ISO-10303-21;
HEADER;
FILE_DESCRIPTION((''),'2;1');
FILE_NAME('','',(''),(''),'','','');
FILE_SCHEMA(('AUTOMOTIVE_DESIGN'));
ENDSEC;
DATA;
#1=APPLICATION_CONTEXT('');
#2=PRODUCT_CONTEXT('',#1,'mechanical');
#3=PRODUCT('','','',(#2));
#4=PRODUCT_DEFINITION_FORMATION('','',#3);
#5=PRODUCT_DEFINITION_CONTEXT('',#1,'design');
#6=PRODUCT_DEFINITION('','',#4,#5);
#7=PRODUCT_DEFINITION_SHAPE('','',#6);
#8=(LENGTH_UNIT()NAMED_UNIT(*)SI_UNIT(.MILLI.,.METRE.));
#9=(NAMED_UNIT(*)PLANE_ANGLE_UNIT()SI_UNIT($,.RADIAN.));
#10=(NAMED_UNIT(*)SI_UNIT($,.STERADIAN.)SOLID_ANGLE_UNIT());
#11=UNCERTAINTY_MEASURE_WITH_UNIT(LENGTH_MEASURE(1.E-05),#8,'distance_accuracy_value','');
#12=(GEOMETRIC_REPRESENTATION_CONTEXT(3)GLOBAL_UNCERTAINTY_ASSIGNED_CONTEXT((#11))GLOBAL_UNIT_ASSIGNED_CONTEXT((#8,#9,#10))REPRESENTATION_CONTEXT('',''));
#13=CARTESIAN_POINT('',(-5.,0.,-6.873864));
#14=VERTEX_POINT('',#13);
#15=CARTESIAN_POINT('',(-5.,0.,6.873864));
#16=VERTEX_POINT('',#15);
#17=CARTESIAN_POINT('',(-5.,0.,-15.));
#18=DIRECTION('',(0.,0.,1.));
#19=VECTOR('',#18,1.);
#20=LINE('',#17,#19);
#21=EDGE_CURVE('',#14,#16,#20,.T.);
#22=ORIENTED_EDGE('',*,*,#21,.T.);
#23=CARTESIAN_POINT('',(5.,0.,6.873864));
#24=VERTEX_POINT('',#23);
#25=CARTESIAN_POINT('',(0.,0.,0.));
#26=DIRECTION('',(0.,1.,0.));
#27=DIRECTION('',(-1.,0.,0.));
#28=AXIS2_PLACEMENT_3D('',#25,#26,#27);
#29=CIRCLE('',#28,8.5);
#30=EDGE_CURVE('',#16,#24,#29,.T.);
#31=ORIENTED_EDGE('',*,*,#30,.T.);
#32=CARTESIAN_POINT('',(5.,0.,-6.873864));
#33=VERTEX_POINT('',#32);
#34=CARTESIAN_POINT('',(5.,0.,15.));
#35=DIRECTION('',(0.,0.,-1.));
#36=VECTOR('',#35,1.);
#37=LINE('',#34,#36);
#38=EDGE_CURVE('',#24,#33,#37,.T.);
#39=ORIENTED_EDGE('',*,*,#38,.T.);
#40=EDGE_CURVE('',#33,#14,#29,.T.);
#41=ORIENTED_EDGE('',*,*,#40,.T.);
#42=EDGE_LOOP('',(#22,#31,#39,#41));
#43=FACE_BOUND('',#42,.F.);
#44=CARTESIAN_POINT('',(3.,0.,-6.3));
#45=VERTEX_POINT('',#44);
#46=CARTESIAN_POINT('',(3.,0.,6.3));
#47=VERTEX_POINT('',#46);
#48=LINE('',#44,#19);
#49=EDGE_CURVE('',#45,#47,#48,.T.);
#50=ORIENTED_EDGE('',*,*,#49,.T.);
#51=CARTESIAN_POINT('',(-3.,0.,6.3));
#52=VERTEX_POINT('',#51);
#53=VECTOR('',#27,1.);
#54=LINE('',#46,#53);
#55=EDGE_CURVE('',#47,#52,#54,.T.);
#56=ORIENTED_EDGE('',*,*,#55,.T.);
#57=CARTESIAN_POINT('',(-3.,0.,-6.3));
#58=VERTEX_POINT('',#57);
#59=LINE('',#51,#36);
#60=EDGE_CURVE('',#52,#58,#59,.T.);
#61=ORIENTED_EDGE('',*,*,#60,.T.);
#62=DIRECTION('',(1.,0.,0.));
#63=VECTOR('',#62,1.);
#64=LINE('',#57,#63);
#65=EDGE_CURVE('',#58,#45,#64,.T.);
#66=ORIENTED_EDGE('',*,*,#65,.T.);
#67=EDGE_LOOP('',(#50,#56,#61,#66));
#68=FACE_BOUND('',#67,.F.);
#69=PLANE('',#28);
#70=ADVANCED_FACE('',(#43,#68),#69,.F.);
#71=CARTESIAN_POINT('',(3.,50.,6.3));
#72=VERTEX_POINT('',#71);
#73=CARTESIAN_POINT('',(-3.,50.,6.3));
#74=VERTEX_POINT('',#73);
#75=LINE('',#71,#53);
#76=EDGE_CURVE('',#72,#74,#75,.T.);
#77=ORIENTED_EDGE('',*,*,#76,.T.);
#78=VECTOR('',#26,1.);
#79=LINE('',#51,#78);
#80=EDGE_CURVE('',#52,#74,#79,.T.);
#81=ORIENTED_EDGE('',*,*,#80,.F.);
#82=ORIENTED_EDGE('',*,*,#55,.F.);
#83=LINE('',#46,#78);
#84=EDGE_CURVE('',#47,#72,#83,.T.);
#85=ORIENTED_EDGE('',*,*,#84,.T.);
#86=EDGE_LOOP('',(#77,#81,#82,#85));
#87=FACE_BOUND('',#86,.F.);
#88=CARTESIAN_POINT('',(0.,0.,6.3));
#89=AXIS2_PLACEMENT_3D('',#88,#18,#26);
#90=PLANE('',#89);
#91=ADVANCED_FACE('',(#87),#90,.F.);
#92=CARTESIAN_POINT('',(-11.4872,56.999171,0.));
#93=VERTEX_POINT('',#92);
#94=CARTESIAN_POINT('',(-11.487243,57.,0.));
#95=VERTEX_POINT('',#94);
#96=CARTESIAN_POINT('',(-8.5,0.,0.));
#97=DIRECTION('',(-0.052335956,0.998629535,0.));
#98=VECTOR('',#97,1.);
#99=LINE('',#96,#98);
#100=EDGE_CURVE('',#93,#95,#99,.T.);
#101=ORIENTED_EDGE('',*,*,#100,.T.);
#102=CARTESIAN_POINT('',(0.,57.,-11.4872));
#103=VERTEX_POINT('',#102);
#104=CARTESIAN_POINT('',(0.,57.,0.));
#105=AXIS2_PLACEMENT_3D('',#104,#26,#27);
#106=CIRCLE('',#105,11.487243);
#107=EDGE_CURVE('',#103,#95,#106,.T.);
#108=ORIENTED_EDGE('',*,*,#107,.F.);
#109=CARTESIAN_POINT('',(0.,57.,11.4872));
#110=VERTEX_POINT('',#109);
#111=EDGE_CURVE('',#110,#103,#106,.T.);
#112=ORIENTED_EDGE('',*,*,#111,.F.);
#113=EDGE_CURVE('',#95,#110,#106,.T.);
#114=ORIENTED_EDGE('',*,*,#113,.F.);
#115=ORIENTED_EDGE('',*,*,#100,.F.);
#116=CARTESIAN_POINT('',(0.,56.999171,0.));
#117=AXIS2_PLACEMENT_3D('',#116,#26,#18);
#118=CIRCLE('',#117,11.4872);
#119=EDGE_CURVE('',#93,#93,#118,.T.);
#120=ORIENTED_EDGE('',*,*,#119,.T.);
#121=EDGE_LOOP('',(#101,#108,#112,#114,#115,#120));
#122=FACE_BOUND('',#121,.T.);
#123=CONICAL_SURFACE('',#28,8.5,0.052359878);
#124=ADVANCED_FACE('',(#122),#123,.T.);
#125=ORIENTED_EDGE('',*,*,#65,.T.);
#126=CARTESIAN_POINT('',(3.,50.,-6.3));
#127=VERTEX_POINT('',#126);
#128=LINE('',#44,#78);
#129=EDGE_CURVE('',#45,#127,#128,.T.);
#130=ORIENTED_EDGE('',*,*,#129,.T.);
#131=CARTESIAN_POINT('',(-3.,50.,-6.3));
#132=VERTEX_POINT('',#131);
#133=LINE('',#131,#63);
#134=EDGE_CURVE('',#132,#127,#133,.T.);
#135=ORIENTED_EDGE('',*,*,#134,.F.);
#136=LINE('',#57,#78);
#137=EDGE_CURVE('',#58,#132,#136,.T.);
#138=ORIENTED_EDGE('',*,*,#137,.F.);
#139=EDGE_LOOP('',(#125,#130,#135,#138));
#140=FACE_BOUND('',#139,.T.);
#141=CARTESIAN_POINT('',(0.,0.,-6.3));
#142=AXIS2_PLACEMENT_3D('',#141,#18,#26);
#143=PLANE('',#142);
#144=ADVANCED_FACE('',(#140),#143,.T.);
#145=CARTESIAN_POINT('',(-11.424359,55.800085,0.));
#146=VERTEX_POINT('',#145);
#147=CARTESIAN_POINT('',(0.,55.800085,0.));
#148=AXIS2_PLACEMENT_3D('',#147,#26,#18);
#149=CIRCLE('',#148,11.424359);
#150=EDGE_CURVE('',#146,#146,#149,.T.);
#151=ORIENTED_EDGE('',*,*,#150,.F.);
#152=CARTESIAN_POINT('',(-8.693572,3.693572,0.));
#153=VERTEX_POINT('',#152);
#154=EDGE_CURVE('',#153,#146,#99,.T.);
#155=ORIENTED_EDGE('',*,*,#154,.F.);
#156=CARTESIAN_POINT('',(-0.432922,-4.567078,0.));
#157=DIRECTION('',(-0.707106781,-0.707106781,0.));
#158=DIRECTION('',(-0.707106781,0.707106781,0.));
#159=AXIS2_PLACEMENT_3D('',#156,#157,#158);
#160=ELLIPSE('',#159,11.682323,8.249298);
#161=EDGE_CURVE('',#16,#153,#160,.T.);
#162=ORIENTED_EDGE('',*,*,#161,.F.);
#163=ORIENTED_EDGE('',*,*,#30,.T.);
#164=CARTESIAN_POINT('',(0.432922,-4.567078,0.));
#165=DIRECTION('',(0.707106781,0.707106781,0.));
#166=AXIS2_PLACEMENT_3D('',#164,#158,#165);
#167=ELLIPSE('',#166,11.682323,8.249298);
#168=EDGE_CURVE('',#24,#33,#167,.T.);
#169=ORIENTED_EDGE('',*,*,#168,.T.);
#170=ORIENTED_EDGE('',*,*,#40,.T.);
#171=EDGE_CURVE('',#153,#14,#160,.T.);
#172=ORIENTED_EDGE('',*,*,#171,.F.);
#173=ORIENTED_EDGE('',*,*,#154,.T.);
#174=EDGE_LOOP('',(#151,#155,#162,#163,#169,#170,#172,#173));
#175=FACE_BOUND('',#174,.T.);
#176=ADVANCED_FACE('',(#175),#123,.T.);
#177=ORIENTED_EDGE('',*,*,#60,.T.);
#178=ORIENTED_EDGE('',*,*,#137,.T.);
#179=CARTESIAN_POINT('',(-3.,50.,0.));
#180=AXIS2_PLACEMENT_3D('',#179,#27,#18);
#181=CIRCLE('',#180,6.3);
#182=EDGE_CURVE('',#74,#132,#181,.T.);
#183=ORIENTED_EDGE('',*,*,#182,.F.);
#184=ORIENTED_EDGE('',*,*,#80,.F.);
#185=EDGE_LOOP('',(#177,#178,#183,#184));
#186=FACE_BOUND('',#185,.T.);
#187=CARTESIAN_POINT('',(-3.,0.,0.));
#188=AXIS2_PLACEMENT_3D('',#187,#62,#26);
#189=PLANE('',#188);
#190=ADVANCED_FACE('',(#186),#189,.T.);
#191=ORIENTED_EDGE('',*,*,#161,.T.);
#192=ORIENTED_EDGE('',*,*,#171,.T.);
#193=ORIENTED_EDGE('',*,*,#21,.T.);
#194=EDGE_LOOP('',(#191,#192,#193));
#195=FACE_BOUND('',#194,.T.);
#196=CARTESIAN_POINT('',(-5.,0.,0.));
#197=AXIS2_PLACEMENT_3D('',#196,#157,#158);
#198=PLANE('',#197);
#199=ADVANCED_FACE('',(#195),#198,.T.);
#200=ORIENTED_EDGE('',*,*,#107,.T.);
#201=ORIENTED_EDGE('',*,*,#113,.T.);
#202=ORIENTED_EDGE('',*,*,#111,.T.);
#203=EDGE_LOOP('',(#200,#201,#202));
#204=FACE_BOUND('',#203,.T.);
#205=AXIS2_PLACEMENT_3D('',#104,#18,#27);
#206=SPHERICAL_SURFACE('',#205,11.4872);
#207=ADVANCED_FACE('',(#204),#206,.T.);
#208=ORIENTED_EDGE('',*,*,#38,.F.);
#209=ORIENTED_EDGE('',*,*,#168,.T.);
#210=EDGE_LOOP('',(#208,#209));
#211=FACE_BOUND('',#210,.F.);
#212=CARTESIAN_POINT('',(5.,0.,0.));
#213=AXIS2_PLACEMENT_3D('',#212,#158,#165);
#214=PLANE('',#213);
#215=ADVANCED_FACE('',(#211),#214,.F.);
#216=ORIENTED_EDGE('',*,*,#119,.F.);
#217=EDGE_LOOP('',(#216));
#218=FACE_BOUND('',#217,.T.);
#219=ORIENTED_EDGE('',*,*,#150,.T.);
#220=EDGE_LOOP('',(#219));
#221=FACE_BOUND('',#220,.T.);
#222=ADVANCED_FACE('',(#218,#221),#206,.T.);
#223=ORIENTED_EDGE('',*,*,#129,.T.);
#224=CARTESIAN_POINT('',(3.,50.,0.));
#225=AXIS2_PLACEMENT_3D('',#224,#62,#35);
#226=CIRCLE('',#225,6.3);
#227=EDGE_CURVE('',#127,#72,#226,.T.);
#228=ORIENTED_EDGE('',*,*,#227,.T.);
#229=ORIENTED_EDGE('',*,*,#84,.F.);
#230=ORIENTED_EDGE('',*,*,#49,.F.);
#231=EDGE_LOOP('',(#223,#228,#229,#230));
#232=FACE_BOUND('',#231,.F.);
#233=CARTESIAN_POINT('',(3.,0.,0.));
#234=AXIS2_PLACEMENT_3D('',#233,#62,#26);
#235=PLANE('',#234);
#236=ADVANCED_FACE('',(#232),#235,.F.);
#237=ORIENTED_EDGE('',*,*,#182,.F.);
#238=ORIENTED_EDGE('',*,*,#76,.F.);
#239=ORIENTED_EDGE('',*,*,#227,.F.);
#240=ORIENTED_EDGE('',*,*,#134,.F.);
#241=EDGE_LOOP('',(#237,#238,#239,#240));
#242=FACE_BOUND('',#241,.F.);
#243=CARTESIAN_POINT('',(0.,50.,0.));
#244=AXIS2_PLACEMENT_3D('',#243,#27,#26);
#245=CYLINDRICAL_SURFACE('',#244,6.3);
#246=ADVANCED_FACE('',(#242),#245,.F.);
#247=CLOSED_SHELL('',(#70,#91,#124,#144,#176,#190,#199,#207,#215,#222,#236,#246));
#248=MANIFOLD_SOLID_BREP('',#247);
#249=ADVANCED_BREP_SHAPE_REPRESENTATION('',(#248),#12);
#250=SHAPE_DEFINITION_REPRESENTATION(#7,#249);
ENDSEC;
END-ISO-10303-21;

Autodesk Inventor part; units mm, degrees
ref_plane "YZ Plane" through (0, 0, 0) normal (1, 0, 0) x (0, 1, 0)
ref_plane "XZ Plane" through (0, 0, 0) normal (0, 1, 0) x (-1, 0, 0)
ref_plane "XY Plane" through (0, 0, 0) normal (0, 0, 1) x (1, 0, 0)
sketch "Szkic1" plane through (0, 0, 0) normal (0, 1, 0) x (-1, 0, 0)
  circle A0 centre (0, 0) radius 8.5
  dimension "d0" = 17
extrude "Wyciągnięcie proste1" add sketch "Szkic1" along normal blind 57 draft 3
sketch "Szkic2" plane through (0, 57, 0) normal (0, 1, 0) x (1, 0, 0)
  circle A0 centre (0, 0) radius 11.4872
  line L0 (0, -11.4872) -> (0, 11.4872)
revolve "Obrót1" add sketch "Szkic2" angle 360 about axis through (0, 57, 11.4872) along (0, 0, -1) picked at (-4.984, 2.1752) contours L0 A0
sketch "Szkic3" plane through (0, 0, 0) normal (1, 0, 0) x (0, 1, 0)
  line L0 (0, 0) -> (0, -6.3)
  line L1 (0, -8.5) -> (0, 8.5) projected
  line L2 (55.7993, 11.4243) -> (55.7993, -11.4243) projected
  line L3 (0, 0) -> (0, 6.3)
  circle A0 centre (50, 0) radius 6.3
  line L4 (0, 6.3) -> (50, 6.3)
  line L5 (0, -6.3) -> (50, -6.3)
  point P0 (55.7993, 6.3)
  point P1 (50, 6.3)
  dimension "d4" = 6.3
  dimension "d5" = 6.3
  dimension "d13" = 50
sketch "Szkic4" plane through (0, 0, 0) normal (0, 0, 1) x (1, 0, 0)
  line L0 (0, 0) -> (5, 0)
  line L1 (8.5, 0) -> (-8.5, 0) projected
  line L2 (5, 0) -> (10.8623, 5.8623)
  line L3 (10.8623, 5.8623) -> (10.8623, -4.5556)
  line L4 (0, 0) -> (-5, 0)
  line L5 (-5, 0) -> (-11.3925, 6.3925)
  line L6 (-11.3925, 6.3925) -> (-11.3925, -5.0943)
  line L7 (-11.3925, -5.0943) -> (10.8623, -5.0943)
  line L8 (10.8623, -5.0943) -> (10.8623, -4.5556)
  dimension "d8" = 5
  dimension "d9" = 135
  dimension "d10" = 5
extrude "Wyciągnięcie proste3" cut sketch "Szkic4" along normal mid plane 30
extrude "Wyciągnięcie proste4" cut sketch "Szkic3" along normal mid plane 6
properties material "Kauczuk"
